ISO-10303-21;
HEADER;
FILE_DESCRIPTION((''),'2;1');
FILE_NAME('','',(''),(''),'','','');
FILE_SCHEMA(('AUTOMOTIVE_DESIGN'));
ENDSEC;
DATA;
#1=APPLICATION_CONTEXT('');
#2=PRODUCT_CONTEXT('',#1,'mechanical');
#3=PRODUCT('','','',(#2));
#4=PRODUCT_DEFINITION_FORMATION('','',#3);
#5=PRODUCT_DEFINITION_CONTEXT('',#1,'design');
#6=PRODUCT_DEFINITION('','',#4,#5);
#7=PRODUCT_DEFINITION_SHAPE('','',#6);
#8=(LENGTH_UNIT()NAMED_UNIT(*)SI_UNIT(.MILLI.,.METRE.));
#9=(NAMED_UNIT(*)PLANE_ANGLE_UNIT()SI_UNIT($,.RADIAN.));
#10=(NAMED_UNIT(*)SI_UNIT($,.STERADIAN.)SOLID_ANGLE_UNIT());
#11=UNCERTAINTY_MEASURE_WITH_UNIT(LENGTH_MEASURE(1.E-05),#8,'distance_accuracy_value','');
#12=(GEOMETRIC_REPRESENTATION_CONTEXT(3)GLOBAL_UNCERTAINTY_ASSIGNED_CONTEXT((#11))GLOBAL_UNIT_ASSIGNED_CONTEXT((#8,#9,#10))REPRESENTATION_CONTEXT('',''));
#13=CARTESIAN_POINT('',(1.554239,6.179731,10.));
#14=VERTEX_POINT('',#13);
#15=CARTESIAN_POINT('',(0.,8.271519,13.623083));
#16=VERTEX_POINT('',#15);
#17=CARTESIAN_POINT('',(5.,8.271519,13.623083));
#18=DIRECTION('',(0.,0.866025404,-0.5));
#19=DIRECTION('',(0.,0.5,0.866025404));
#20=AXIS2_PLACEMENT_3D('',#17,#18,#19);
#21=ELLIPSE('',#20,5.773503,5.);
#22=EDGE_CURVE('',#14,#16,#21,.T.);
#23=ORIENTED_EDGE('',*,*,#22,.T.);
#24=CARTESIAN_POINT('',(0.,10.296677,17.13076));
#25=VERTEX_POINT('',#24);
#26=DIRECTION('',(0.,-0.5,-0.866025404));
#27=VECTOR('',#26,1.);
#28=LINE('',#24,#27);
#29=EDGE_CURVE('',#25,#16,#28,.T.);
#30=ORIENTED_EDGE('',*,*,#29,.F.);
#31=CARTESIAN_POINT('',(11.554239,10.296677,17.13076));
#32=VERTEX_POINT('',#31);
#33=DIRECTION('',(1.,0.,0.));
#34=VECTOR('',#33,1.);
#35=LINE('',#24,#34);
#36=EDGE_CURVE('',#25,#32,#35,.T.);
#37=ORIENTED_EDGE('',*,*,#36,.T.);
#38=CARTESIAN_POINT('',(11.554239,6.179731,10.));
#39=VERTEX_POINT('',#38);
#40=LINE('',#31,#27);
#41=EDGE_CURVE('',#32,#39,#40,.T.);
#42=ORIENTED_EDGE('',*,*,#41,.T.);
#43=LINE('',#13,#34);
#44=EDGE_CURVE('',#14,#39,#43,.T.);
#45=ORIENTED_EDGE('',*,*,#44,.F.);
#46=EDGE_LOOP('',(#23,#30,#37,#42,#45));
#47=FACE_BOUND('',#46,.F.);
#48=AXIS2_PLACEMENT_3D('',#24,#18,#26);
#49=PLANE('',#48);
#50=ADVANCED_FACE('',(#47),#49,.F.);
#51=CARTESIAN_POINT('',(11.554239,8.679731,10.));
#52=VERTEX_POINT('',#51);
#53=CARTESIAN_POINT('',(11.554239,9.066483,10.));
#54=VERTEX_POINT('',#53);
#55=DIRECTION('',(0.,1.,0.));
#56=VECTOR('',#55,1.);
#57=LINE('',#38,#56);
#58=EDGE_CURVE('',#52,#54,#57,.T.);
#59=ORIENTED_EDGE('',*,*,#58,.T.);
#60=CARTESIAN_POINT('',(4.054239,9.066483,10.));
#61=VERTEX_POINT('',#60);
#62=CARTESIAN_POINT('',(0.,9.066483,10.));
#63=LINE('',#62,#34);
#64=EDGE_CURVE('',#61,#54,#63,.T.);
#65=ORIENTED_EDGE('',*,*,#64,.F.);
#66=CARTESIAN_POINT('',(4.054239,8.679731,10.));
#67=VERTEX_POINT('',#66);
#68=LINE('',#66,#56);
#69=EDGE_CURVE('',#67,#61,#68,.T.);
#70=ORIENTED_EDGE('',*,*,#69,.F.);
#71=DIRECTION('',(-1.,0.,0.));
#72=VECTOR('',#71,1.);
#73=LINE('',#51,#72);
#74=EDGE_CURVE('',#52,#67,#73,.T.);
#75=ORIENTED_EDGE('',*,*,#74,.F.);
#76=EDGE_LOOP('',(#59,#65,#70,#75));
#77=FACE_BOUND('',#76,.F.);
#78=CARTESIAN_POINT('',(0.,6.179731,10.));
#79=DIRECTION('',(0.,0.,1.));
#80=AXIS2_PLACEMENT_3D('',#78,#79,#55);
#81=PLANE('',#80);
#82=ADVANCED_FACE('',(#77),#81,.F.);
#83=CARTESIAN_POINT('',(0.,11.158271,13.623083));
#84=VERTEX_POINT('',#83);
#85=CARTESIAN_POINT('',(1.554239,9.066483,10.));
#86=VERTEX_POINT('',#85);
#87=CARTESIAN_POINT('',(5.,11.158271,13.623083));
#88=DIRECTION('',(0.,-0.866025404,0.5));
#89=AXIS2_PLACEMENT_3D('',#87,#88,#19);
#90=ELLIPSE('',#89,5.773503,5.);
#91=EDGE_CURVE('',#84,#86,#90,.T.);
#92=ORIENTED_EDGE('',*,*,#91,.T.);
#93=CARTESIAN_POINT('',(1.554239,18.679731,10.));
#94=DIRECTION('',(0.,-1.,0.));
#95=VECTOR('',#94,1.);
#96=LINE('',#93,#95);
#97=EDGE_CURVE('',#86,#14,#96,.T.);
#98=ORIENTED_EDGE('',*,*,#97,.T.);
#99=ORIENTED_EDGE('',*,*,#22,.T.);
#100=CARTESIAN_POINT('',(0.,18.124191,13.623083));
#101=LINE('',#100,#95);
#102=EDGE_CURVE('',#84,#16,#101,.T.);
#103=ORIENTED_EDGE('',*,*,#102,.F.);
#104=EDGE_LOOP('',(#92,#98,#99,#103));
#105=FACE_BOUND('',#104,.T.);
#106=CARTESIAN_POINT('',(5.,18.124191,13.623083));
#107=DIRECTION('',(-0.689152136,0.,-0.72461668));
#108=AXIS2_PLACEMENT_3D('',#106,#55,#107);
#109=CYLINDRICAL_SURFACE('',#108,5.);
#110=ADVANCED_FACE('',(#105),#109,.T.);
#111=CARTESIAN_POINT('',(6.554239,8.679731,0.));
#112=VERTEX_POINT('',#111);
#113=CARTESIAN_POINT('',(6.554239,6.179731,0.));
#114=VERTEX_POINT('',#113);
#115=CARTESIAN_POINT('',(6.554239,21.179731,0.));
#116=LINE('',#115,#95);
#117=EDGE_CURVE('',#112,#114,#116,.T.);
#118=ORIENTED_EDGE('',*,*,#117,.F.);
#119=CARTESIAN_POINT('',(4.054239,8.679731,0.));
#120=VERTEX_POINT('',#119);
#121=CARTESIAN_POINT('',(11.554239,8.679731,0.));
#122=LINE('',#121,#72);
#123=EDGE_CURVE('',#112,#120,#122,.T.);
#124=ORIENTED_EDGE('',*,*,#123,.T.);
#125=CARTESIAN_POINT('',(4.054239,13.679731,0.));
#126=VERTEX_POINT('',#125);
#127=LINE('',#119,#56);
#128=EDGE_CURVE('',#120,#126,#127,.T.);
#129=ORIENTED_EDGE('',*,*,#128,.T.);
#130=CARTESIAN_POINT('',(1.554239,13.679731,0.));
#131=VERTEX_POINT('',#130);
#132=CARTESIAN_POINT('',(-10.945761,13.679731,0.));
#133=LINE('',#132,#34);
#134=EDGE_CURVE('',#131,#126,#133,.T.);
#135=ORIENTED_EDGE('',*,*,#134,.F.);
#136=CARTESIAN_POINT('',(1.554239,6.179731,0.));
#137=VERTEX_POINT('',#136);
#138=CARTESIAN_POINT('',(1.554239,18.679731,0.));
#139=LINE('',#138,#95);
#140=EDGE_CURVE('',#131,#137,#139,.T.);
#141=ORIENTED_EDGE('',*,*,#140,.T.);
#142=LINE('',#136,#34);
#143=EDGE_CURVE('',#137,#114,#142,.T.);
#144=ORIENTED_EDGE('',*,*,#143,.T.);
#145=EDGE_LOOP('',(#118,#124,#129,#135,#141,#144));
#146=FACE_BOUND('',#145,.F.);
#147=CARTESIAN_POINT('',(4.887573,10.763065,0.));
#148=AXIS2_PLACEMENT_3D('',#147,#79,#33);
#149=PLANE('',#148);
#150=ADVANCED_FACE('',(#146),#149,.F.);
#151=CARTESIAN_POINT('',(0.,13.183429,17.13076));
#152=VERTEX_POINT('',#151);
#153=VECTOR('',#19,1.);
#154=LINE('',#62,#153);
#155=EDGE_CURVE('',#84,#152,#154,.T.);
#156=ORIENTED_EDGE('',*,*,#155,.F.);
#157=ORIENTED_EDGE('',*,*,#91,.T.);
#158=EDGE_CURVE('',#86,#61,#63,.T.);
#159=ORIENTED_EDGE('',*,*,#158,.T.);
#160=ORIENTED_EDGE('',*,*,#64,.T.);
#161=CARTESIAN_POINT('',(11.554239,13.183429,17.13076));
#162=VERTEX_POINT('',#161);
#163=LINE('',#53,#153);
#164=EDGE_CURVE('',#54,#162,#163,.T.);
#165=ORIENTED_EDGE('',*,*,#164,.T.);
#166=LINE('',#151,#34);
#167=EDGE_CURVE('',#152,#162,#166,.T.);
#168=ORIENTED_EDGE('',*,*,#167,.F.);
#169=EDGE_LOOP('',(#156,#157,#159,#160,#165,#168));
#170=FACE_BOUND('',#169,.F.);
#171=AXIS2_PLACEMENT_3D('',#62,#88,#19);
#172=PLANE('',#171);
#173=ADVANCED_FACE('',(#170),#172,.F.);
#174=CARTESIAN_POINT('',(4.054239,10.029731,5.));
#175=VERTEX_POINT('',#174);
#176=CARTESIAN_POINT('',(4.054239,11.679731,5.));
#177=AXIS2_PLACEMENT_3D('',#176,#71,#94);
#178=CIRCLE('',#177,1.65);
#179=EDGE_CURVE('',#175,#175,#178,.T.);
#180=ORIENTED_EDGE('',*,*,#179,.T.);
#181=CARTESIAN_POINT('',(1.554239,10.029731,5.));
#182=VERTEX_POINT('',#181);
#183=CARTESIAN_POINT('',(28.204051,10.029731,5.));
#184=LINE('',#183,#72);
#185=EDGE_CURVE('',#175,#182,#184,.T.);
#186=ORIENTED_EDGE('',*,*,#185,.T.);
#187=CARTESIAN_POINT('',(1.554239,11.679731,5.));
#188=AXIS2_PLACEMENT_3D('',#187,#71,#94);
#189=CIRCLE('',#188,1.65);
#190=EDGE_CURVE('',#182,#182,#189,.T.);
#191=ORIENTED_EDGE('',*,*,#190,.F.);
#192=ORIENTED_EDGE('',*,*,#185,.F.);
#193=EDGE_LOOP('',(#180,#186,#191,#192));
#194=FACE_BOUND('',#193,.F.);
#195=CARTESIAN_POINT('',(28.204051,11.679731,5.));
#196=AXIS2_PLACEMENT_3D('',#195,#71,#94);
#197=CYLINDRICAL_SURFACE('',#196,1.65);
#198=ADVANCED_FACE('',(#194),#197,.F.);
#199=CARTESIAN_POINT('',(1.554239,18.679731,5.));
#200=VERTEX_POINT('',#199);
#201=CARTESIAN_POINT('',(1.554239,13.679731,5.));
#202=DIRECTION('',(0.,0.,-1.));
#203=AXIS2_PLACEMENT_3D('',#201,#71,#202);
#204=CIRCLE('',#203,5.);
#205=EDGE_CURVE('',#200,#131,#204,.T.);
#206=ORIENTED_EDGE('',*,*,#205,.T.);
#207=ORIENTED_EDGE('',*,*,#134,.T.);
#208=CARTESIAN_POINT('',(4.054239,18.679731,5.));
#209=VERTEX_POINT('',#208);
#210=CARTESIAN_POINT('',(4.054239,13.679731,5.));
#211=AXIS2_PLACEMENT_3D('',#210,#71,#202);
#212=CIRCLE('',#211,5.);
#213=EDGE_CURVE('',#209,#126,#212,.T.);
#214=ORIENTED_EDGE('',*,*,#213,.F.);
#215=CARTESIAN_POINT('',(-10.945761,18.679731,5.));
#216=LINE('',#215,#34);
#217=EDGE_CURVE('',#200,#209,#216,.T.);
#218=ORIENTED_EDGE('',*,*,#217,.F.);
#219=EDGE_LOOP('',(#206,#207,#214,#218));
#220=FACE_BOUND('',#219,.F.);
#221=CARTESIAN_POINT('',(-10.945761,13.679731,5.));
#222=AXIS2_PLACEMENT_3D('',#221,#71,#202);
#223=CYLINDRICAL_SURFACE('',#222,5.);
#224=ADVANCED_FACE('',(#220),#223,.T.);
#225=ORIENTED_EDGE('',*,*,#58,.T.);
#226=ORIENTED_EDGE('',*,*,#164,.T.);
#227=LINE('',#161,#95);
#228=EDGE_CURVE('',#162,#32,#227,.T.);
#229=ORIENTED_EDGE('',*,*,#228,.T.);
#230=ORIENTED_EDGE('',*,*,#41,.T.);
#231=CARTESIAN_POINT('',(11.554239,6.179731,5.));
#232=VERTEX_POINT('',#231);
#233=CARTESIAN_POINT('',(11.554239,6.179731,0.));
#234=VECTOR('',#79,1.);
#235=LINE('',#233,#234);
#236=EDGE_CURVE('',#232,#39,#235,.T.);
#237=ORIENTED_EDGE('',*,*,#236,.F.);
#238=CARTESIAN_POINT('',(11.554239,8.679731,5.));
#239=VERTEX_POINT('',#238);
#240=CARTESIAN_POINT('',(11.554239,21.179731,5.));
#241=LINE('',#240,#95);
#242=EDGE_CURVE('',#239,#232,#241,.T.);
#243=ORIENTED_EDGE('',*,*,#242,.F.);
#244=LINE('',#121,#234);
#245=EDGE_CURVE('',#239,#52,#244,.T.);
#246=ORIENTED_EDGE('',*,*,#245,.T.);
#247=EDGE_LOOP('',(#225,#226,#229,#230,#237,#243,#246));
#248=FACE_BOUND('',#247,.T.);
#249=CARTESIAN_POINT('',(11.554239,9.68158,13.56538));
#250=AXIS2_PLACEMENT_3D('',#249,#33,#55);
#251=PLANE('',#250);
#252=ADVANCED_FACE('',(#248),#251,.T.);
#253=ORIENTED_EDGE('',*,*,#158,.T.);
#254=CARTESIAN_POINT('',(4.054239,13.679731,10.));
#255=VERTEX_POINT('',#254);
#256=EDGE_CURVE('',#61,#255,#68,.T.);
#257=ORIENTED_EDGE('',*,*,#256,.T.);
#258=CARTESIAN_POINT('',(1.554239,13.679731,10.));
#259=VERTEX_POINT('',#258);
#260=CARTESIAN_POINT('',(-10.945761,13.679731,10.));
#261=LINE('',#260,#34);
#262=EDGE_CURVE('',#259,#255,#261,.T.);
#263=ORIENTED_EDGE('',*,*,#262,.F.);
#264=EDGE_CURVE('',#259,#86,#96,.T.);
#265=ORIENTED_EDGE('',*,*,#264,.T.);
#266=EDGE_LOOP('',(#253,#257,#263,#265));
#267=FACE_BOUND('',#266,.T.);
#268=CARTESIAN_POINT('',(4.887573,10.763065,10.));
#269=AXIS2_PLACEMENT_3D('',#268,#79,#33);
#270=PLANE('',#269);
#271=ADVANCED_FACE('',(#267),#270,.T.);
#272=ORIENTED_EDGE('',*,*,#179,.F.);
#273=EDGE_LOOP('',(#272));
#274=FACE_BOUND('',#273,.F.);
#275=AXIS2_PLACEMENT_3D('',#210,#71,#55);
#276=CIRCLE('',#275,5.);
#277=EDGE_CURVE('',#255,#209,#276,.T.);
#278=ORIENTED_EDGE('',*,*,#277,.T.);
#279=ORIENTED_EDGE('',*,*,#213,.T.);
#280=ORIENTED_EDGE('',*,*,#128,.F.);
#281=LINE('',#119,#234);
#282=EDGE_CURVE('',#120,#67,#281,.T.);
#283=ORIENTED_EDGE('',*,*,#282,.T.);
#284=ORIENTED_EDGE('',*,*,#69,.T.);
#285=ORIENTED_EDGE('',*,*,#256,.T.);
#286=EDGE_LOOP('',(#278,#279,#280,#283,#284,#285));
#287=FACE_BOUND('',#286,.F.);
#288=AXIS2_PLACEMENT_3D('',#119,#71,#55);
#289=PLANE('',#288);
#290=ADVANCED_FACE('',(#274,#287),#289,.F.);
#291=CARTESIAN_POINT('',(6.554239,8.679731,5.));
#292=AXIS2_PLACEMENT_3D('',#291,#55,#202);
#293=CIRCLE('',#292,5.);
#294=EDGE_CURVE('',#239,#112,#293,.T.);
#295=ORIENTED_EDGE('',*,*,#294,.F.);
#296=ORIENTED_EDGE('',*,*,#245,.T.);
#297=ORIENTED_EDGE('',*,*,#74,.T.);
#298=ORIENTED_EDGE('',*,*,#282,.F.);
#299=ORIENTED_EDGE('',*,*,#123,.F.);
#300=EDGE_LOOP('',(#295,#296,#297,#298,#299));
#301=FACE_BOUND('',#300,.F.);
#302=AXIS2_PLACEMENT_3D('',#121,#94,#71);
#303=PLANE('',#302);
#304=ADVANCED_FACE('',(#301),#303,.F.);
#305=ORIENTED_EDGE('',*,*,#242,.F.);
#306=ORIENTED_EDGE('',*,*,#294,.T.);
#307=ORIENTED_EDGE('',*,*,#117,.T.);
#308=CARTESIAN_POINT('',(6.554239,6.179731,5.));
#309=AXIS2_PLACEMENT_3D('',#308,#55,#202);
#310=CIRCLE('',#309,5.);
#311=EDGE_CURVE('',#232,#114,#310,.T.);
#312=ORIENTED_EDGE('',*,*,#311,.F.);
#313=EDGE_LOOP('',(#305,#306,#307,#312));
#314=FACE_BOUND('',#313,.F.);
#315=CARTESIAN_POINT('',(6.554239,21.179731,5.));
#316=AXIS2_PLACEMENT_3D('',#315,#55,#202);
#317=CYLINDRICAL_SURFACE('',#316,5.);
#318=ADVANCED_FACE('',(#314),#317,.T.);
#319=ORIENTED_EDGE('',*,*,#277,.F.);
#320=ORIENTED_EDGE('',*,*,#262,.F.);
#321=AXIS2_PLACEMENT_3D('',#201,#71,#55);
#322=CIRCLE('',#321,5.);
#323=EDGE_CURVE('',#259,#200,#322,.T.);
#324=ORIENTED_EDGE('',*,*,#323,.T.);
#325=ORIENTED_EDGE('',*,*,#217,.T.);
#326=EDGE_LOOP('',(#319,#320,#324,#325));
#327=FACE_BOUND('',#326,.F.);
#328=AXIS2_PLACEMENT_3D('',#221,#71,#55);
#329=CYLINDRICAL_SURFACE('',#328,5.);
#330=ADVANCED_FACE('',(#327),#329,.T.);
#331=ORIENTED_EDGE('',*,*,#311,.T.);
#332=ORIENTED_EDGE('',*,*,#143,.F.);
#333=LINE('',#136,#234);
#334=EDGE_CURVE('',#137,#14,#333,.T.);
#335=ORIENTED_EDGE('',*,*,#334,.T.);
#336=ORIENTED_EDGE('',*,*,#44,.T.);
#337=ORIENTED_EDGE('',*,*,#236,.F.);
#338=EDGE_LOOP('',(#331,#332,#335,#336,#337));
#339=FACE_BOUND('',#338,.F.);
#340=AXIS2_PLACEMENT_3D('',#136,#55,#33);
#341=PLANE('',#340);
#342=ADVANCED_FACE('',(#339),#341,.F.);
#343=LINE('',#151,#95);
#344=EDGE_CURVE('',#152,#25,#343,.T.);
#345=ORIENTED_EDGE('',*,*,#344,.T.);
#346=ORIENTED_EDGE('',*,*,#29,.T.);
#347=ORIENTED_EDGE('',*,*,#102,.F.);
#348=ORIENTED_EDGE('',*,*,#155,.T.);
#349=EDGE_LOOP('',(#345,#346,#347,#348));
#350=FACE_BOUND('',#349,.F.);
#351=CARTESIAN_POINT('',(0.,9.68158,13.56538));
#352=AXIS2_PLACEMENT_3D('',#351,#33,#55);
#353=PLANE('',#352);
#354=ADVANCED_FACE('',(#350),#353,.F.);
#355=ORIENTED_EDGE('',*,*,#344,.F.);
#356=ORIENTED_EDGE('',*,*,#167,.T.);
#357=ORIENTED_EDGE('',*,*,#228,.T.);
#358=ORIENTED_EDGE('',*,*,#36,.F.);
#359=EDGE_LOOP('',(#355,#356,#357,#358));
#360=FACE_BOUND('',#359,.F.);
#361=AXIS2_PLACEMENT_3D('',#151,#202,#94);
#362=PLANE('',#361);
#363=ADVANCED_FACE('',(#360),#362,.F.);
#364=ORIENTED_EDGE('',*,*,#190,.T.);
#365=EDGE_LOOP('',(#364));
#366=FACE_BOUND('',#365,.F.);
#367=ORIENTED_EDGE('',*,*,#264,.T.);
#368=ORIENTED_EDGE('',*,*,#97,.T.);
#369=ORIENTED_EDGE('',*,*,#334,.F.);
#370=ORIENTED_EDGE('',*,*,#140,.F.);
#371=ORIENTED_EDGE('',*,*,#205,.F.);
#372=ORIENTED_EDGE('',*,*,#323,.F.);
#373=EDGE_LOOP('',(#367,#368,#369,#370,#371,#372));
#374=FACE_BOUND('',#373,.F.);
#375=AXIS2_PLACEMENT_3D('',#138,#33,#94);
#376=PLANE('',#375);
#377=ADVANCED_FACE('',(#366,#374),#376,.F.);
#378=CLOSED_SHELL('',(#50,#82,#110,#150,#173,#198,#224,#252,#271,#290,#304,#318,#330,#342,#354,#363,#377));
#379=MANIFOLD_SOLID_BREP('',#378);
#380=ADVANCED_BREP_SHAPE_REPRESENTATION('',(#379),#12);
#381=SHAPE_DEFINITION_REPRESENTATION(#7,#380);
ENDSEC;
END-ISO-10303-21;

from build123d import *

# Parameters (mm, degrees)
F1_DEPTH    = 10
F4_DEPTH    = 11.5542393178
F5_D        = 3.3
F6_T1_DEPTH = 27.5
F6_T3_DEPTH = 27.5
F6_T5_DEPTH = 21.0021683442


# Not quite as in the source:
# - a fillet or chamfer that OpenCascade refuses, or shapes differently, is made with other operations: its cross-section is extruded or revolved along the edge and cut away or added


with BuildPart() as f1:
    # F0 (on Top) → F1 (new body)
    with BuildSketch(Plane.XY):
        Polygon((4.0542393178, 8.6797312124), (4.0542393178, 18.6797312124), (1.5542393178, 18.6797312124), (1.5542393178, 8.6797312124), (1.5542393178, 6.1797312124), (11.5542393178, 6.1797312124), (11.5542393178, 8.6797312124), align=None)
    extrude(amount=F1_DEPTH)

    # F3 (on Right) → F4 (join, through all)
    with BuildSketch(Plane.YZ):
        Polygon((10.296677351, 17.1307598841), (6.1797312124, 10), (9.0664825583, 10), (13.183428697, 17.1307598841), align=None)
    extrude(amount=F4_DEPTH)

    # F5 (through all)
    with Locations(Plane.YZ.offset(4.0542393178)):
        with Locations((11.6797312124, 5)):
            Hole(F5_D / 2)

    # F6: fillet of radius 5 on 4 edges, made by hand

    # F6_s2 → F6_t1 (cut)
    with BuildSketch(Plane.YZ.offset(-10.9457606822)):
        with BuildLine():
            ThreePointArc((13.6797312124, 0), (17.2152651183, 1.4644660941), (18.6797312124, 5))
            Line((18.6797312124, 5), (18.6797312124, 0))
            Line((18.6797312124, 0), (13.6797312124, 0))
        make_face()
        with BuildLine():
            ThreePointArc((18.6797312124, 5), (17.2152651183, 8.5355339059), (13.6797312124, 10))
            Line((13.6797312124, 10), (18.6797312124, 10))
            Line((18.6797312124, 10), (18.6797312124, 5))
        make_face()
    extrude(amount=F6_T1_DEPTH, mode=Mode.SUBTRACT)

    # F6_s4 → F6_t3 (cut)
    with BuildSketch(Plane.XZ.offset(-21.1797312124)):
        with BuildLine():
            ThreePointArc((6.5542393178, 0), (10.0897732237, 1.4644660941), (11.5542393178, 5))
            Line((11.5542393178, 5), (11.5542393178, 0))
            Line((11.5542393178, 0), (6.5542393178, 0))
        make_face()
    extrude(amount=F6_T3_DEPTH, mode=Mode.SUBTRACT)

    # F6_s6 → F6_t5 (cut)
    with BuildSketch(Plane.XZ.offset(-18.1241910575)):
        with BuildLine():
            ThreePointArc((1.5542393178, 10), (0.4049590094, 11.6518912998), (0, 13.6230833997))
            Line((0, 13.6230833997), (0, 10))
            Line((0, 10), (1.5542393178, 10))
        make_face()
    extrude(amount=F6_T5_DEPTH, mode=Mode.SUBTRACT)


solid = f1.part
